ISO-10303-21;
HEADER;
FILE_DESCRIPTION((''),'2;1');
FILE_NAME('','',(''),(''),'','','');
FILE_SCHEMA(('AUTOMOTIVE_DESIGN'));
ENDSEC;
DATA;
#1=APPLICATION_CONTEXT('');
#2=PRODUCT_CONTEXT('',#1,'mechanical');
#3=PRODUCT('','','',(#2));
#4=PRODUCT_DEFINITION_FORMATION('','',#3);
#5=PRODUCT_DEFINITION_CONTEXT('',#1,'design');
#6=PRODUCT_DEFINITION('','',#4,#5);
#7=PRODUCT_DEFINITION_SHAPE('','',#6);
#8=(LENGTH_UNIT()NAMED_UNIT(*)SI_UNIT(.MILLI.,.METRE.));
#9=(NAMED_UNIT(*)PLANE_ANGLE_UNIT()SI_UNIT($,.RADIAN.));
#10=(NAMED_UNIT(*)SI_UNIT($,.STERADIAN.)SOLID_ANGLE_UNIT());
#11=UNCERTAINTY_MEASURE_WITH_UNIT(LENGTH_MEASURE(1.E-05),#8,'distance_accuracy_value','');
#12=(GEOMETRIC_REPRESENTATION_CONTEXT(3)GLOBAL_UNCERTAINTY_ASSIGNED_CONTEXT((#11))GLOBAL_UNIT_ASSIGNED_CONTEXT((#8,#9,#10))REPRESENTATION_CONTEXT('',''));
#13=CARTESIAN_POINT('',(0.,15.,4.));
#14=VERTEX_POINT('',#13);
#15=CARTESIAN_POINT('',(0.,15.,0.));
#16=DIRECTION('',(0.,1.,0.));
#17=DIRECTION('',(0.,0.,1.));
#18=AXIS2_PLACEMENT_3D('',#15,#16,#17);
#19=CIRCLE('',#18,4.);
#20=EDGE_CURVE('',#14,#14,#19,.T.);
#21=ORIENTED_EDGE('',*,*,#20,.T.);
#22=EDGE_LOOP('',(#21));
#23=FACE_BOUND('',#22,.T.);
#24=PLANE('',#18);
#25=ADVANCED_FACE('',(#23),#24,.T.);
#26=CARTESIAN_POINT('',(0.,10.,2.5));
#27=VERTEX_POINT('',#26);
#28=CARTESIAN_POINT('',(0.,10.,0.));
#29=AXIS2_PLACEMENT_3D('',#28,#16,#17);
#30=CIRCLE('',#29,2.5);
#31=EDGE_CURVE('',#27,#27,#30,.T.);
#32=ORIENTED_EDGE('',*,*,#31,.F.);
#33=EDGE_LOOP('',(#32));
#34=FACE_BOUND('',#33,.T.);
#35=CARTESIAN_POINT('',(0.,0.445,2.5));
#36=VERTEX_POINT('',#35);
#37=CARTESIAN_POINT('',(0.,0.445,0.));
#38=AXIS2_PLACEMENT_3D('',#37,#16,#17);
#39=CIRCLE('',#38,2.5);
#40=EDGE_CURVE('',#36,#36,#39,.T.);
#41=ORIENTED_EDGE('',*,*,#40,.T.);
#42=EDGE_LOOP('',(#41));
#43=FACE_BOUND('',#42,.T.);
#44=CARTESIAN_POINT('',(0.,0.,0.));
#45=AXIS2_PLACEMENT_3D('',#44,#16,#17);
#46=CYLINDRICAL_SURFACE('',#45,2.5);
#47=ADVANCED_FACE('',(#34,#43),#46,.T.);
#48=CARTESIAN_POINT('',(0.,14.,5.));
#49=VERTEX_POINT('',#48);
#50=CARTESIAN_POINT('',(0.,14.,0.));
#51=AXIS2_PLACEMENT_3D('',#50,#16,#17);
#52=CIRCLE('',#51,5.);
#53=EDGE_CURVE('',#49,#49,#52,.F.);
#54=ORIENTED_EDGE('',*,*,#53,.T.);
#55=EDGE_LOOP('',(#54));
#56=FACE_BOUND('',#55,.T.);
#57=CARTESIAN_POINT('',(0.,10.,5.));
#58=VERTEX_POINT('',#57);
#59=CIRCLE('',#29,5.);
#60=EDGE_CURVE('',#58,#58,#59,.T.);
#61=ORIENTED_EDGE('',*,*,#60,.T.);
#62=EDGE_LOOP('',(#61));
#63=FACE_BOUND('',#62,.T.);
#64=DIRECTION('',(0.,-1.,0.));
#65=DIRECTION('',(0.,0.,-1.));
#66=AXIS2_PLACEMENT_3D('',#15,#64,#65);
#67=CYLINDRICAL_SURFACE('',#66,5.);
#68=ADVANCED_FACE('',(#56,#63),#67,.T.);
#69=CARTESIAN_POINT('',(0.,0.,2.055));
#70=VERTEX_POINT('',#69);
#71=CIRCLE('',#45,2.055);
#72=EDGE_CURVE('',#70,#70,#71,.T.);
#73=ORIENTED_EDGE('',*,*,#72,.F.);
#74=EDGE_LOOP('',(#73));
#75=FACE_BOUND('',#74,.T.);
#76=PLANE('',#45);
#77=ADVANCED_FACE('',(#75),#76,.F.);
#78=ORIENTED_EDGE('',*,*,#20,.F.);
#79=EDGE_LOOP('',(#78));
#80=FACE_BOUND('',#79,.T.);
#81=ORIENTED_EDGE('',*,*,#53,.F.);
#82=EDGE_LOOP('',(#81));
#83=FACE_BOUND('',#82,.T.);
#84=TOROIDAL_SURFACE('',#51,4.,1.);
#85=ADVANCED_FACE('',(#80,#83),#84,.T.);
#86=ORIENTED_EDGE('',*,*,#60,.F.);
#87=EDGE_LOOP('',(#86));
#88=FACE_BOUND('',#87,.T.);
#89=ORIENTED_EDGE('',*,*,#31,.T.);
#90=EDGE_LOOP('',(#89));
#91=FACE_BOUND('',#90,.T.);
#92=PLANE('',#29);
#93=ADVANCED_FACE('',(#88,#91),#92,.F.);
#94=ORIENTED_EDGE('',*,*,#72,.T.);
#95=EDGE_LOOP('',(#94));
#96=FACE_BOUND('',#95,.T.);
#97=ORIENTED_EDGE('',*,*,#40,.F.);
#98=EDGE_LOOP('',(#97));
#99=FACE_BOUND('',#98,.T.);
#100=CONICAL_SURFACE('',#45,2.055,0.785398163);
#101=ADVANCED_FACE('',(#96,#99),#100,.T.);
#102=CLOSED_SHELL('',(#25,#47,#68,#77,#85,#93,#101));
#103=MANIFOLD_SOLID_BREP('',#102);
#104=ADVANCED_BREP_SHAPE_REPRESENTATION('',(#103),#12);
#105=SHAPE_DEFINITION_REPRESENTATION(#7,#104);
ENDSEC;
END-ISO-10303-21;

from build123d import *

# Parameters (mm, degrees)
SKETCH1_R           = 3
BOSS_EXTRUDE1_DEPTH = 10
SKETCH2_R           = 5
BOSS_EXTRUDE2_DEPTH = 5
FILLET1_R           = 1


# Read off the part's stored shape, not the designer's step: M5 Machine Threads Stud1
with BuildPart() as part:
    # Sketch1 → Boss-Extrude1 (new body)
    with BuildSketch(Plane(origin=(0, 0, 0), x_dir=(1, 0, 0), z_dir=(0, 1, 0))):
        with Locations(Location((0, 0, 0), (0, 0, 270))):
            Circle(SKETCH1_R)
    extrude(amount=BOSS_EXTRUDE1_DEPTH)

    # Sketch2 → Boss-Extrude2 (add)
    with BuildSketch(Plane(origin=(0, 10, 0), x_dir=(1, 0, 0), z_dir=(0, 1, 0))):
        with Locations(Location((0, 0, 0), (0, 0, 270))):
            Circle(SKETCH2_R)
    extrude(amount=BOSS_EXTRUDE2_DEPTH)

    # Fillet1
    fillet1_edges = [part.edges().sort_by_distance(p)[0] for p in [
        (0, 15, -5),
    ]]
    fillet(fillet1_edges, radius=FILLET1_R)

    # M5 Machine Threads Stud1 outline → M5 Machine Threads Stud1 (revolve, cut)
    with BuildSketch(Plane.XY):
        Polygon((3, 10), (2.5, 10), (2.5, 0.445), (2.055, 0), (3, 0), align=None)
    revolve(axis=Axis((0, 0, 0), (0, 1, 0)), mode=Mode.SUBTRACT)


solid = part.part
